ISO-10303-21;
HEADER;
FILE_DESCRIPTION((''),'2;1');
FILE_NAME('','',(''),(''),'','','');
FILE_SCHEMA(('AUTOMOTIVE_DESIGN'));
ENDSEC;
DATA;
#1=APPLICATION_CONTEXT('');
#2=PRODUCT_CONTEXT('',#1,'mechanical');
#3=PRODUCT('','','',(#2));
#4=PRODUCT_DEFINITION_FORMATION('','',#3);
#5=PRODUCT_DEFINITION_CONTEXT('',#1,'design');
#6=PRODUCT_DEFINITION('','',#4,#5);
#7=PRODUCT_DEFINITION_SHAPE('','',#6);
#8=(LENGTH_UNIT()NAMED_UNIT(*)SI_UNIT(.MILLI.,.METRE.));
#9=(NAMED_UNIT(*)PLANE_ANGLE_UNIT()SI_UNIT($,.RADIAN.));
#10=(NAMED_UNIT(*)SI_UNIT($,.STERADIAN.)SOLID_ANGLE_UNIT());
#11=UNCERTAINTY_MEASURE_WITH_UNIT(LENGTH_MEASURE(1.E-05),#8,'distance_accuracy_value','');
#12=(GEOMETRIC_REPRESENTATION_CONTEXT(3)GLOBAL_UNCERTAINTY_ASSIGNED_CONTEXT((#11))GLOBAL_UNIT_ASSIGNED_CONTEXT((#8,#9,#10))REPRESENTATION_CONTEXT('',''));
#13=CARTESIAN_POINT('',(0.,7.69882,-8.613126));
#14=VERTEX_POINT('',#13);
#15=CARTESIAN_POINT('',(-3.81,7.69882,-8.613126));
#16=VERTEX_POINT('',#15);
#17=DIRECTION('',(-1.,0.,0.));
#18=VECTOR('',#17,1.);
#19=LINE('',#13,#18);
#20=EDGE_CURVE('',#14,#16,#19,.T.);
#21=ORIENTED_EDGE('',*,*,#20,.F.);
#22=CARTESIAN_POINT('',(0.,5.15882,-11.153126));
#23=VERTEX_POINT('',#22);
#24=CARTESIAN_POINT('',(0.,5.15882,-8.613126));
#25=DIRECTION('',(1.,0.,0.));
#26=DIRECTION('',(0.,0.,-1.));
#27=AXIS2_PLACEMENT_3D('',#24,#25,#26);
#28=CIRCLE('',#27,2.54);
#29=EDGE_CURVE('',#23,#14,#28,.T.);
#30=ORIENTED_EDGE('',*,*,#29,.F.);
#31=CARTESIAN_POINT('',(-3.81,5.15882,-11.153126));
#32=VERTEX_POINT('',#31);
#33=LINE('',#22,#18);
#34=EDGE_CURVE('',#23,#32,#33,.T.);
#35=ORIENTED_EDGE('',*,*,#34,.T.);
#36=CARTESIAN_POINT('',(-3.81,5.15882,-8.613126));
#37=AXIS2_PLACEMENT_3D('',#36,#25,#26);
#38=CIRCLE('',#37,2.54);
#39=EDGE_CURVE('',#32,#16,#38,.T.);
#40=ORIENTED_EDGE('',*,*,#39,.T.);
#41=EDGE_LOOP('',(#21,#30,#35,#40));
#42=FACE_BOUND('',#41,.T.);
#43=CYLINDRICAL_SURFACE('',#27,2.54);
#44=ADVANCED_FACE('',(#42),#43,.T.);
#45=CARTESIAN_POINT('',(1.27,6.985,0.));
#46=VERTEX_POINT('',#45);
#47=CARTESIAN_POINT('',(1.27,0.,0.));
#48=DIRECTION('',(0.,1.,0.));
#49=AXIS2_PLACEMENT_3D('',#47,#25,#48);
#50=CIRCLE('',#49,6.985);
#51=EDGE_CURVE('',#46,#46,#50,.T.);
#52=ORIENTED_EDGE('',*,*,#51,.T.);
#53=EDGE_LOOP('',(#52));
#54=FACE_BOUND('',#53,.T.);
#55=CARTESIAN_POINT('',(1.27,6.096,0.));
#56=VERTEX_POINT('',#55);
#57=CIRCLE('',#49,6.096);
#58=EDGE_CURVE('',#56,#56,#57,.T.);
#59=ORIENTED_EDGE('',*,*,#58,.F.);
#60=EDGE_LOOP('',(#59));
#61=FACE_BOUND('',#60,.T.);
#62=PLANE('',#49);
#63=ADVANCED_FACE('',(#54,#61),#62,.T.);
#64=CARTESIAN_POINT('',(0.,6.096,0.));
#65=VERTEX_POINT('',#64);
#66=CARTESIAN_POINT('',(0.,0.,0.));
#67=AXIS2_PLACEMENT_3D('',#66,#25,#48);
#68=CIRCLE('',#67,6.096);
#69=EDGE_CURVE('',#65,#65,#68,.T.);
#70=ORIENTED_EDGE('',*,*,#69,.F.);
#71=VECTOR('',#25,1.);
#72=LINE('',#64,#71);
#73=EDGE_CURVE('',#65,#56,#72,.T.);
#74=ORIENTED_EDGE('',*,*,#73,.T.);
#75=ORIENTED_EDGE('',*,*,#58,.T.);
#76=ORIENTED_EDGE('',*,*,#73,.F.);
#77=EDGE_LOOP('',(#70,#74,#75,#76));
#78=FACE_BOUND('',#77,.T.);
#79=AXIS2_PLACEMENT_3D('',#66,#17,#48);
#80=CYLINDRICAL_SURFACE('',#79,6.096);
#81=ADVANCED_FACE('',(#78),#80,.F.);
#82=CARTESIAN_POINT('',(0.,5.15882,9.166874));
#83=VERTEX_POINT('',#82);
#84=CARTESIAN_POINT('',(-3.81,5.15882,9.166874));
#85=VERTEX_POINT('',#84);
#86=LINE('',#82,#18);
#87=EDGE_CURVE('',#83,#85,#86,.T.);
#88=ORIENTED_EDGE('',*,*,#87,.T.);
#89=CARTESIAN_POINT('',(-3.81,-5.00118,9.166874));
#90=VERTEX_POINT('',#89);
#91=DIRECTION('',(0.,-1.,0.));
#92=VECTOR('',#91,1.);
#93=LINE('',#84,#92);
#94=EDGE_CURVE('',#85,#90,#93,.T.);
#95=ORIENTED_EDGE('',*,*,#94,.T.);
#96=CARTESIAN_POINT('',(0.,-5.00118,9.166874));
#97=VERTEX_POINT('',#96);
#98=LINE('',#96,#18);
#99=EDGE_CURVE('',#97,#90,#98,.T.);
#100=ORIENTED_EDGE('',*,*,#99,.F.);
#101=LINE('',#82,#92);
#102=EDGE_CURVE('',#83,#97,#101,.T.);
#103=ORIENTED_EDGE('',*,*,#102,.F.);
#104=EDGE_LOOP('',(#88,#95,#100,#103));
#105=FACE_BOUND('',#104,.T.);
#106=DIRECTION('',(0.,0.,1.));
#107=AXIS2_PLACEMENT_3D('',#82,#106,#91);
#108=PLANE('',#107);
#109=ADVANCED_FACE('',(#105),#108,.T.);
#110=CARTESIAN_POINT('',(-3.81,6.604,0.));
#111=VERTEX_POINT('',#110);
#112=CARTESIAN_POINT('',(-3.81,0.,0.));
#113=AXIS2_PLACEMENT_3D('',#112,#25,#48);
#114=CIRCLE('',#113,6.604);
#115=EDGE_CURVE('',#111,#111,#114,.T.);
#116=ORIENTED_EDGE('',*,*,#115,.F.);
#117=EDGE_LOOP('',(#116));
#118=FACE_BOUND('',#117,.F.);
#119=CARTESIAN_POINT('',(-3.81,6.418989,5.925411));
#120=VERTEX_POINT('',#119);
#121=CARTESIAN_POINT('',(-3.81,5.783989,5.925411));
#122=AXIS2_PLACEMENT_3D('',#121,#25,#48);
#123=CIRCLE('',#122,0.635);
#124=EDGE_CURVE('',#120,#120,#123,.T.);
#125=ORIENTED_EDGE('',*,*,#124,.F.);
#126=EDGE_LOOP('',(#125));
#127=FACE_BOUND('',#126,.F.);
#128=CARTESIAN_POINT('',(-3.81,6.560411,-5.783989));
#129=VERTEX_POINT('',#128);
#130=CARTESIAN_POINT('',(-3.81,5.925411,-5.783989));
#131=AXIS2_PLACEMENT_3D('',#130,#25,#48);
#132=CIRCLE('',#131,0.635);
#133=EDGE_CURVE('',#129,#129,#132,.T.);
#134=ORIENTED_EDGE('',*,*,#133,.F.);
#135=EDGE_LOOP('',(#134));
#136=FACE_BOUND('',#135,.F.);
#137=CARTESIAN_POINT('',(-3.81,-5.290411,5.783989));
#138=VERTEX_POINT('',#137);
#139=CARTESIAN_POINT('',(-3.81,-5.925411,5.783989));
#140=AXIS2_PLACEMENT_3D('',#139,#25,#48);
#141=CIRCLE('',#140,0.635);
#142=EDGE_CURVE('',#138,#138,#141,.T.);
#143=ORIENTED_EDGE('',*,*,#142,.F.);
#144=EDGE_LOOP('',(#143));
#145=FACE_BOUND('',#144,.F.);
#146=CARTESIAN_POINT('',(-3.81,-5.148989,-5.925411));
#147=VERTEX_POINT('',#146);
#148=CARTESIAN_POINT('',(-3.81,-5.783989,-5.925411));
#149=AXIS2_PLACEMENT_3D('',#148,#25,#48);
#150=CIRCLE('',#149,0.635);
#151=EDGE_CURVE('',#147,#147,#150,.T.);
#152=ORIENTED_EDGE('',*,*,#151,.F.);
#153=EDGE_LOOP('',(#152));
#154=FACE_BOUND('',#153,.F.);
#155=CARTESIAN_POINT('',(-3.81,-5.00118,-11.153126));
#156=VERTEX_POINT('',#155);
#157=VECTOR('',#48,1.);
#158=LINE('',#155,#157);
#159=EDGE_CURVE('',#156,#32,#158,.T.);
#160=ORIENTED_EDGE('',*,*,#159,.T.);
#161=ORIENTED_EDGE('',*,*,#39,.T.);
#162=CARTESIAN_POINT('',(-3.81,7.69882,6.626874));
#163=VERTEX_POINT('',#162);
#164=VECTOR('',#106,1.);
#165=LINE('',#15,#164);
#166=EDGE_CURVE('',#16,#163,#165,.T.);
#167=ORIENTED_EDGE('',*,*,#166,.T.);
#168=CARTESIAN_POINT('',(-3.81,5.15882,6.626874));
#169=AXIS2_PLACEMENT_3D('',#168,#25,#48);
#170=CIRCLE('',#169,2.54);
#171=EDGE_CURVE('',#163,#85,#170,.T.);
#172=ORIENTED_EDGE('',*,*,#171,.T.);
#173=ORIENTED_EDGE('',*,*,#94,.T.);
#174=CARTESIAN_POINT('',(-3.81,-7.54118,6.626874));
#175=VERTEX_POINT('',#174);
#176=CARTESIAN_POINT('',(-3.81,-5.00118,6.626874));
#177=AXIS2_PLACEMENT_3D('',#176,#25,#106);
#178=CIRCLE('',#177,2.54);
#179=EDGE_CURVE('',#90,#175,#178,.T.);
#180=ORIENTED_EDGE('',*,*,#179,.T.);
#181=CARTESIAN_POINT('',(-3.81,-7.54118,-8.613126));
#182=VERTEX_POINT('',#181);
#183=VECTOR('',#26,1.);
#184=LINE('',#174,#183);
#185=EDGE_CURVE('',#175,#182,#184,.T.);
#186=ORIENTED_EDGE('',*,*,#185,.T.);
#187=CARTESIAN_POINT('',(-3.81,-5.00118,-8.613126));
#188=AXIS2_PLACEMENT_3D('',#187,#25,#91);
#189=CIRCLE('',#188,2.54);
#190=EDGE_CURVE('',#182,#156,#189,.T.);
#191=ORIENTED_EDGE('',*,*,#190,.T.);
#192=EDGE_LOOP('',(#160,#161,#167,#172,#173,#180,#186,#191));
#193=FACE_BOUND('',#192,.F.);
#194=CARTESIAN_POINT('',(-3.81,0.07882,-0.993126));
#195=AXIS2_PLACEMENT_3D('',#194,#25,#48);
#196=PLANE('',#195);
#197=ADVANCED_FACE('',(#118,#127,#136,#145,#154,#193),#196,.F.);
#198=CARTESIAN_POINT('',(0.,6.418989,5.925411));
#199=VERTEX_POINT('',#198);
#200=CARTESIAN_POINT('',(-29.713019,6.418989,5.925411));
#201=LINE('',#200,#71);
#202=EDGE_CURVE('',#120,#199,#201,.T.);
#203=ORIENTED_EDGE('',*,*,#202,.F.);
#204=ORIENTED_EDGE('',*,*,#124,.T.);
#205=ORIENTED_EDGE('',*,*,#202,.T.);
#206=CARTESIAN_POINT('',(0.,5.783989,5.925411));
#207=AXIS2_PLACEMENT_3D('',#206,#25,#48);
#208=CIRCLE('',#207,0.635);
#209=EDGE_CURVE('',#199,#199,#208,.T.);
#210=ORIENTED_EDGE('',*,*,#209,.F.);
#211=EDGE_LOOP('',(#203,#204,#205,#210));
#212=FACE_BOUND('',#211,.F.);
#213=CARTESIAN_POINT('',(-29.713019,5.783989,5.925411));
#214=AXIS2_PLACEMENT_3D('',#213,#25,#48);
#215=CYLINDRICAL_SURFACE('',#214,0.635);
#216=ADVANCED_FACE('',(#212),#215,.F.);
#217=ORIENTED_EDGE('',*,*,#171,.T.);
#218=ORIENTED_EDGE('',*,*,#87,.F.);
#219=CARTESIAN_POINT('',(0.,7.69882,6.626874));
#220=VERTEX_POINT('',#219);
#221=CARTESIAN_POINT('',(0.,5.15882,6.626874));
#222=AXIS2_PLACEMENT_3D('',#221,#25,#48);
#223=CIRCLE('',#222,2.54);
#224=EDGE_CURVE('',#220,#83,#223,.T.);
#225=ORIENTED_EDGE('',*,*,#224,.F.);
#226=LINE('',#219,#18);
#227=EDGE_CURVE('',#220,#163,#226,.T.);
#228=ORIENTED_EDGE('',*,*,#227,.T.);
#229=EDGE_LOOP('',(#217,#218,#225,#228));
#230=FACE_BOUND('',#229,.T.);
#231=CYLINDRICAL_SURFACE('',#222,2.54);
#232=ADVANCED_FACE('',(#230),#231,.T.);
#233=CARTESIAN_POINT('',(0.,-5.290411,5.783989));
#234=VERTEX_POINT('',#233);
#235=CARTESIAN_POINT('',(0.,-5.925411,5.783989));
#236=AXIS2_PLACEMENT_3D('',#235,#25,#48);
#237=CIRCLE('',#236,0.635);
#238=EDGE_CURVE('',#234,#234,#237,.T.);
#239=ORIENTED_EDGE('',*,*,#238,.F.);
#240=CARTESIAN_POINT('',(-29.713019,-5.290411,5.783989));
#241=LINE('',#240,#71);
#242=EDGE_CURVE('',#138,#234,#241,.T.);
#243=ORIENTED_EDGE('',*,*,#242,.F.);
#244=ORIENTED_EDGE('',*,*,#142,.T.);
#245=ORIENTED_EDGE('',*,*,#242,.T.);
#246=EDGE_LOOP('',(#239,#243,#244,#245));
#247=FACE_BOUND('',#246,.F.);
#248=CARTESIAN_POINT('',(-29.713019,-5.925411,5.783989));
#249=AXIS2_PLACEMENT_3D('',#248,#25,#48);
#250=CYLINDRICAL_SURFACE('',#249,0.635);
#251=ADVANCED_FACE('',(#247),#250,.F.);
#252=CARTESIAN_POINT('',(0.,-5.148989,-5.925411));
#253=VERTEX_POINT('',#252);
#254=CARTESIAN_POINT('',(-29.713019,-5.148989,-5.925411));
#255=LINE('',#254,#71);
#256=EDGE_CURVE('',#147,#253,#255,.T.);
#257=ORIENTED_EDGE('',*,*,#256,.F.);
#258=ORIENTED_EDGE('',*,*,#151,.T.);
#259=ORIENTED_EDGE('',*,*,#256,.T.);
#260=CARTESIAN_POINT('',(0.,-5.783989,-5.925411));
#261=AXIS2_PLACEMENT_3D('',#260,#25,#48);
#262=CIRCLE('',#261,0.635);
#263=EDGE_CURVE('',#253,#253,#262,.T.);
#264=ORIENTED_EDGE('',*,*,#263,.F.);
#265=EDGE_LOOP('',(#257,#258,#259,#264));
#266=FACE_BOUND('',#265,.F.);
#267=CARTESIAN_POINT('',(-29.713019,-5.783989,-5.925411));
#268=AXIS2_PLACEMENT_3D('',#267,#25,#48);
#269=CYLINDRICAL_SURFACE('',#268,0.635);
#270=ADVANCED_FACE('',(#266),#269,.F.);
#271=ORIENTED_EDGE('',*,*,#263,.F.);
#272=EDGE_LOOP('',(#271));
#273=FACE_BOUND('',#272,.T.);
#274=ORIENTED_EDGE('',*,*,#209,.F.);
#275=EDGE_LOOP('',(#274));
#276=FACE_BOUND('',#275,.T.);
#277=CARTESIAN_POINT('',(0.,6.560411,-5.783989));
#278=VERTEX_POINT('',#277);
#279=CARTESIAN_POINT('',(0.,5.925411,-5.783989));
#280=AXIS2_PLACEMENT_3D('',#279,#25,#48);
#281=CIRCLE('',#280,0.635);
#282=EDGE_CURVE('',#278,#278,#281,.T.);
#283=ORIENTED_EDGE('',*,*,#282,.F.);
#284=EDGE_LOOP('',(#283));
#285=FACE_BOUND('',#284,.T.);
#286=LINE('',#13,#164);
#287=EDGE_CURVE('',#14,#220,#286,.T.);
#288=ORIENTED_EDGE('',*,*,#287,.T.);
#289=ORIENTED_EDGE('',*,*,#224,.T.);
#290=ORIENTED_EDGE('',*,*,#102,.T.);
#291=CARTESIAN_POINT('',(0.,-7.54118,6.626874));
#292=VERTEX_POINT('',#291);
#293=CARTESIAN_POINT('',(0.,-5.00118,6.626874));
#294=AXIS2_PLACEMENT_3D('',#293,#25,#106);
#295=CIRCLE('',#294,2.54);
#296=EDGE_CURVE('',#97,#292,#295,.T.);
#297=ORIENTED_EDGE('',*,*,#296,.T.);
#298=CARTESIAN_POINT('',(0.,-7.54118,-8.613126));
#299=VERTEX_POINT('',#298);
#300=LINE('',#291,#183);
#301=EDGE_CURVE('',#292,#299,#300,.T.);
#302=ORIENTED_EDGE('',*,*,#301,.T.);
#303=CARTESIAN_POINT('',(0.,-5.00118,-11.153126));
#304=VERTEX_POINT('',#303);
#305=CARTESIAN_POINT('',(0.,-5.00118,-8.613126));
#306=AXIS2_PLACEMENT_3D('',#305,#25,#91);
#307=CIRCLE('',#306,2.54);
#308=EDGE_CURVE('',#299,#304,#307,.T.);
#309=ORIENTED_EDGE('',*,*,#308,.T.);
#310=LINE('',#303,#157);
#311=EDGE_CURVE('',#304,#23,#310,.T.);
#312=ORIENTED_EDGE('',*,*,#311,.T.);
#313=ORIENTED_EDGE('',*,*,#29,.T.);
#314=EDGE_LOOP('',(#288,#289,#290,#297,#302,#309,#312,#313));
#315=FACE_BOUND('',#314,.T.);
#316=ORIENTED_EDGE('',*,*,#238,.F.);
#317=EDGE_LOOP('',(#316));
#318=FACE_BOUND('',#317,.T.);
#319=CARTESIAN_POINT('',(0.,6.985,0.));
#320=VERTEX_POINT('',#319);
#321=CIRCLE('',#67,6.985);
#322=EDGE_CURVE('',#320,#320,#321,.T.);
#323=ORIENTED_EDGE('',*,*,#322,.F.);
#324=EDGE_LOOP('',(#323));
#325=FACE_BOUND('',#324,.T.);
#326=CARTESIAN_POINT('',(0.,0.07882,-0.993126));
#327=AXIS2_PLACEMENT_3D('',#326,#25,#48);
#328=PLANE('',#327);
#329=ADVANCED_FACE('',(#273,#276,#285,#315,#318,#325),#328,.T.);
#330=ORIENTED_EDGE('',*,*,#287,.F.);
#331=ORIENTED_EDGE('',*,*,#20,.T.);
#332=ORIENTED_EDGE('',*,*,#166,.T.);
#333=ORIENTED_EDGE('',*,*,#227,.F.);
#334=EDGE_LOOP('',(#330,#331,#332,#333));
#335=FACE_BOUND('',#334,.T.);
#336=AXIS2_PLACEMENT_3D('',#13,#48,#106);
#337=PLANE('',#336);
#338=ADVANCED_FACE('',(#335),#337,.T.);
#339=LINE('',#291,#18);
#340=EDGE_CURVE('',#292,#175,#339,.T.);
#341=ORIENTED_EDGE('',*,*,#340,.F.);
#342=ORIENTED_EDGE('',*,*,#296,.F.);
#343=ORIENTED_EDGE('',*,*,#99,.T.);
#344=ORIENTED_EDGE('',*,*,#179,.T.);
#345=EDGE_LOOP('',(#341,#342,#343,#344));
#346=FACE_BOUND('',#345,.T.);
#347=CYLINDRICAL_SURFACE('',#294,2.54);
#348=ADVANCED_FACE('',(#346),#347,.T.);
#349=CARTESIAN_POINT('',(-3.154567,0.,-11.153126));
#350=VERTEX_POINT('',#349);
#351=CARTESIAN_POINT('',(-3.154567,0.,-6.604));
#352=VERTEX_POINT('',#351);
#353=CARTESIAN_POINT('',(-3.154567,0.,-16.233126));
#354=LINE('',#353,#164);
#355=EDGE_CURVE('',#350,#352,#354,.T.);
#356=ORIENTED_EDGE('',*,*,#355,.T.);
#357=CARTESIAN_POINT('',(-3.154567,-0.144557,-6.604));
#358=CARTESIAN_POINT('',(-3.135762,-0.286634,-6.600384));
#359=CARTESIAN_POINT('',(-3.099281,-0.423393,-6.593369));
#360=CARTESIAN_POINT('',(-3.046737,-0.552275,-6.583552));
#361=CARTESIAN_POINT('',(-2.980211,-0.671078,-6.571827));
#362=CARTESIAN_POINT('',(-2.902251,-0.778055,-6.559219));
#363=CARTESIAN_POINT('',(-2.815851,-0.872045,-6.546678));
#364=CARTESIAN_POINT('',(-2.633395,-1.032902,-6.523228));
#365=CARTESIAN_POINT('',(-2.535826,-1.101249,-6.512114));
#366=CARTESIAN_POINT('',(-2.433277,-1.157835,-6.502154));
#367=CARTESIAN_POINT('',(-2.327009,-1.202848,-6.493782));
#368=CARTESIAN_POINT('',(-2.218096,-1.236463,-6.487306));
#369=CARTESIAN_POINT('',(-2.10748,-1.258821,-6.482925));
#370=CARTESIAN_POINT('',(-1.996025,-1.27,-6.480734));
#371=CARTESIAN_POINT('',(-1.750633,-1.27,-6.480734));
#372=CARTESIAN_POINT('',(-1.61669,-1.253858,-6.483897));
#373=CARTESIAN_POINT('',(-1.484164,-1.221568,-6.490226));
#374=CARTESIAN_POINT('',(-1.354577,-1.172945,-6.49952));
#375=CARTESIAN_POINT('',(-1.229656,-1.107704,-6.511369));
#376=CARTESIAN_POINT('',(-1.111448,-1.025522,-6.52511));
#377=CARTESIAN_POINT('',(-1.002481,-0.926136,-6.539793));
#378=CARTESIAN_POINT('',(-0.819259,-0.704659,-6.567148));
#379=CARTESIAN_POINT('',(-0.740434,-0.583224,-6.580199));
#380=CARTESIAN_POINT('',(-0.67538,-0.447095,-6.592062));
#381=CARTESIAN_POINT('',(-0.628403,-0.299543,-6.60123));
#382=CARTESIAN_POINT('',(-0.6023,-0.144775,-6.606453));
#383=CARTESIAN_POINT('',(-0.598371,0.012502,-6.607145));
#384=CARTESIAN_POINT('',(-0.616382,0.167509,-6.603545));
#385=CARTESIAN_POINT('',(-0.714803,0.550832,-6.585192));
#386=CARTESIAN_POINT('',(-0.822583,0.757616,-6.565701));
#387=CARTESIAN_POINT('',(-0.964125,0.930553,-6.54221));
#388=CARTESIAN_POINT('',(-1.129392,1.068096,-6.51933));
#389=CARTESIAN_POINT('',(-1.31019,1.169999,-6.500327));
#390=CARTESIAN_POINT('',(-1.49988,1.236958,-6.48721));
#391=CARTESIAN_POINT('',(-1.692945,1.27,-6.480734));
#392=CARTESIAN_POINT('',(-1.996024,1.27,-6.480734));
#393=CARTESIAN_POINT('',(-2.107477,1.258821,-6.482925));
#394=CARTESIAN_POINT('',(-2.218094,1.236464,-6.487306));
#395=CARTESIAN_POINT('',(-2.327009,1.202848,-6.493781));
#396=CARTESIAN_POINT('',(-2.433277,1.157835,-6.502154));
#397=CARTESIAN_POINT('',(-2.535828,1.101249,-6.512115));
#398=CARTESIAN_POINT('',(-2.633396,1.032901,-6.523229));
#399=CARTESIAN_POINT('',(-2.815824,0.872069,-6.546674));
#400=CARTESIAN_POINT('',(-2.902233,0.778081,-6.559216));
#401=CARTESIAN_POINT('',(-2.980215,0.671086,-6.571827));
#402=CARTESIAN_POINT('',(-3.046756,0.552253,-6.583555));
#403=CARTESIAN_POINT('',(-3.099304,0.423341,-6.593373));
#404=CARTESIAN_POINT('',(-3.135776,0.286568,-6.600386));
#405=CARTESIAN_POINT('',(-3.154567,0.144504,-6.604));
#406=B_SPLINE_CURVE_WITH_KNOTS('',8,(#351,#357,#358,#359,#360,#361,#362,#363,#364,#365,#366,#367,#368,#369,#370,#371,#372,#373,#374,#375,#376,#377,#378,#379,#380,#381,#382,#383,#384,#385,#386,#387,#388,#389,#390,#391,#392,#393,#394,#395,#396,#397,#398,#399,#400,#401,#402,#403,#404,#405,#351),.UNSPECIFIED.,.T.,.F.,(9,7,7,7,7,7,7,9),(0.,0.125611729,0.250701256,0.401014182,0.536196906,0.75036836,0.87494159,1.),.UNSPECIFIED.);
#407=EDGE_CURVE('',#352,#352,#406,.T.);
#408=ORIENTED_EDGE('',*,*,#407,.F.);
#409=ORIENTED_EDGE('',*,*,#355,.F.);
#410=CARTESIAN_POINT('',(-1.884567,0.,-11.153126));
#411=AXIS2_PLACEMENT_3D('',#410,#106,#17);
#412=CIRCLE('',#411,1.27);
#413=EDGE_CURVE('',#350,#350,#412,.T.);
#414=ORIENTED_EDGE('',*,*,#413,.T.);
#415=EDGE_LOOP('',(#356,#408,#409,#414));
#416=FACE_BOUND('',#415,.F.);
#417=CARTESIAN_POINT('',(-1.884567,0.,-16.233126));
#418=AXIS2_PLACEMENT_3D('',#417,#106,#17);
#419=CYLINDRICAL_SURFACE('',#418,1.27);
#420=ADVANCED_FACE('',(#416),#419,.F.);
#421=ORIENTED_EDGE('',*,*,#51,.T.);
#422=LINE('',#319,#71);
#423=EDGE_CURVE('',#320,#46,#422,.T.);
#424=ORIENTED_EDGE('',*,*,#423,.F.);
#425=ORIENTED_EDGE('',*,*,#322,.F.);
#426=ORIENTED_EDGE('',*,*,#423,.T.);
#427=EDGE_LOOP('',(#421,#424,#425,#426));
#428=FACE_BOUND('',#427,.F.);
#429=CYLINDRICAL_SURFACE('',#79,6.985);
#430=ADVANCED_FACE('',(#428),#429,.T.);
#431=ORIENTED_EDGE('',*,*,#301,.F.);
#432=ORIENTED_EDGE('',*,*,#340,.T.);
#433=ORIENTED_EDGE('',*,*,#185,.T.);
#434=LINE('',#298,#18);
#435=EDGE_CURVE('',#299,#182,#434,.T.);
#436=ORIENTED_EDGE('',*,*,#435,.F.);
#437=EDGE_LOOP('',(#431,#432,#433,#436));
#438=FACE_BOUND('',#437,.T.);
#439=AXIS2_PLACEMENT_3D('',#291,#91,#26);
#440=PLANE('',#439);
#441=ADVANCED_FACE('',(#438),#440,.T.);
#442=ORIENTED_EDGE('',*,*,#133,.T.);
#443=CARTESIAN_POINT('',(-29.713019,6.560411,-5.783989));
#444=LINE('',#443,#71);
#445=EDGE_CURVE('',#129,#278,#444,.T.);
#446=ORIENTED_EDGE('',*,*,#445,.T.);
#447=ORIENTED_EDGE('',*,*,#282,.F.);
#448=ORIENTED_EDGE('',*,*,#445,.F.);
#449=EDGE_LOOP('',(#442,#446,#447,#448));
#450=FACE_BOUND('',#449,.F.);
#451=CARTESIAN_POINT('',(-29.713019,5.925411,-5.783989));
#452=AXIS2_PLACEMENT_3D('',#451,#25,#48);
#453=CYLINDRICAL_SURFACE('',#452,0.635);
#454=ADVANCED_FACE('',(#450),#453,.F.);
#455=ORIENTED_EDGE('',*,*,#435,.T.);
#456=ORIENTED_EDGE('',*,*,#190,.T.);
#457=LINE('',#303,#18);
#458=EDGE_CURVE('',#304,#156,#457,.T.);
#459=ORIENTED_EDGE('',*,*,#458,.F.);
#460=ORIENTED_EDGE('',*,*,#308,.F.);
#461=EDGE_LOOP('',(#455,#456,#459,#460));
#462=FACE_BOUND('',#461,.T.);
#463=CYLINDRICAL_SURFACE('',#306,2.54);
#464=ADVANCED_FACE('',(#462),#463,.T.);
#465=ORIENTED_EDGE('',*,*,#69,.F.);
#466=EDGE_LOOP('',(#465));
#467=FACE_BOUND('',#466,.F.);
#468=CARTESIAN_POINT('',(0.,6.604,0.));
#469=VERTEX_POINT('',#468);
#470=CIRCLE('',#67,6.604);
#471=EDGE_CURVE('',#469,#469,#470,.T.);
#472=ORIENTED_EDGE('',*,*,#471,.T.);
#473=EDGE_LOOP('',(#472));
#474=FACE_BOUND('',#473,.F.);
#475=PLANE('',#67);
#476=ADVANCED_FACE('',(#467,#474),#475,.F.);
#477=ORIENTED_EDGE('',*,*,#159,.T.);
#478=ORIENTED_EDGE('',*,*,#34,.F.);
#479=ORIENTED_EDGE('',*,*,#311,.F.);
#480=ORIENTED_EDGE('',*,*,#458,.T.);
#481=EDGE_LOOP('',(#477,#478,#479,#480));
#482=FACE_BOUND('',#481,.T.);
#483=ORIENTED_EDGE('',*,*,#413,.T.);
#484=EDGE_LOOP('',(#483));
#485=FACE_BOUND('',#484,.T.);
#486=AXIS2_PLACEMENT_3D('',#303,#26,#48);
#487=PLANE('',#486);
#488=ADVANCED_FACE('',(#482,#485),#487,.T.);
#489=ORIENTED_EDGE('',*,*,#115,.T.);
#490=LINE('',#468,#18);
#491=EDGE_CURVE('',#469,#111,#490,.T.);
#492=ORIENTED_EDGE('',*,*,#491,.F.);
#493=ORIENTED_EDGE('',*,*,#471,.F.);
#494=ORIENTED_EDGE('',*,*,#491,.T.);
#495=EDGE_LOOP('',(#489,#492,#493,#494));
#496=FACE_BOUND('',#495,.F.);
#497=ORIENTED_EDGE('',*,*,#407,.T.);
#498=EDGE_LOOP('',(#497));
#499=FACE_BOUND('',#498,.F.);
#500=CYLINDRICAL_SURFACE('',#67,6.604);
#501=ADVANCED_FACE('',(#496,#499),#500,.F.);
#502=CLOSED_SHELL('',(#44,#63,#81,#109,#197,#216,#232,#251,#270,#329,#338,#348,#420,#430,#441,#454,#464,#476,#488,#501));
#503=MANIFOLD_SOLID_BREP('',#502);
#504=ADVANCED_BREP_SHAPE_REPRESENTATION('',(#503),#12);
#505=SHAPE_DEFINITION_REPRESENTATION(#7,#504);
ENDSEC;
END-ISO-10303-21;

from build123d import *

# Parameters (mm, degrees)
F0_R     = 6.985
F0_R_2   = 6.096
F1_DEPTH = 1.27
F2_R     = 6.604
F3_DEPTH = 3.81
F5_D     = 1.27
F7_D     = 2.54
F7_DEPTH = 5.08
F7_TIP   = 0.7630929862


# Not quite as in the source:
# - a feature names something its author has since deleted; it is built from what else it names


with BuildPart() as f1:
    # F0 (on Right) → F1 (new body)
    with BuildSketch(Plane.YZ):
        Circle(F0_R)
        Circle(F0_R_2, mode=Mode.SUBTRACT)
    extrude(amount=F1_DEPTH)

    # F2 (on Right) → F3 (join)
    with BuildSketch(Plane.YZ):
        with BuildLine():
            Line((5.1588201895, 9.1668736476), (-5.0011798105, 9.1668736476))
            ThreePointArc((-5.0011798105, 9.1668736476), (-6.7972310347, 8.4229248718), (-7.5411798105, 6.6268736476))
            Line((-7.5411798105, 6.6268736476), (-7.5411798105, -8.6131263524))
            ThreePointArc((-7.5411798105, -8.6131263524), (-6.7972310347, -10.4091775766), (-5.0011798105, -11.1531263524))
            Line((-5.0011798105, -11.1531263524), (5.1588201895, -11.1531263524))
            ThreePointArc((5.1588201895, -11.1531263524), (6.9548714137, -10.4091775766), (7.6988201895, -8.6131263524))
            Line((7.6988201895, -8.6131263524), (7.6988201895, 6.6268736476))
            ThreePointArc((7.6988201895, 6.6268736476), (6.9548714137, 8.4229248718), (5.1588201895, 9.1668736476))
        make_face()
        Circle(F2_R, mode=Mode.SUBTRACT)
    extrude(amount=-F3_DEPTH)

    # F5 (through all)
    with Locations(Plane(origin=(-3.81, 0, 0), x_dir=(0, -1, 0), z_dir=(-1, 0, 0))):
        with Locations((5.9254106074, 5.7839893926), (-5.7839893926, 5.9254106074), (5.7839893926, -5.9254106074), (-5.9254106074, -5.7839893926)):
            Hole(F5_D / 2)

    # F7
    with Locations(Plane(origin=(0, 0, -11.1531263524), x_dir=(1, 0, 0), z_dir=(0, 0, -1))):
        with Locations((-1.8845667364, 0)):
            Hole(F7_D / 2, depth=F7_DEPTH)
            with Locations((0, 0, -(F7_DEPTH + F7_TIP / 2))):  # 118° drill point
                Cone(0, F7_D / 2, F7_TIP, mode=Mode.SUBTRACT)


solid = f1.part
